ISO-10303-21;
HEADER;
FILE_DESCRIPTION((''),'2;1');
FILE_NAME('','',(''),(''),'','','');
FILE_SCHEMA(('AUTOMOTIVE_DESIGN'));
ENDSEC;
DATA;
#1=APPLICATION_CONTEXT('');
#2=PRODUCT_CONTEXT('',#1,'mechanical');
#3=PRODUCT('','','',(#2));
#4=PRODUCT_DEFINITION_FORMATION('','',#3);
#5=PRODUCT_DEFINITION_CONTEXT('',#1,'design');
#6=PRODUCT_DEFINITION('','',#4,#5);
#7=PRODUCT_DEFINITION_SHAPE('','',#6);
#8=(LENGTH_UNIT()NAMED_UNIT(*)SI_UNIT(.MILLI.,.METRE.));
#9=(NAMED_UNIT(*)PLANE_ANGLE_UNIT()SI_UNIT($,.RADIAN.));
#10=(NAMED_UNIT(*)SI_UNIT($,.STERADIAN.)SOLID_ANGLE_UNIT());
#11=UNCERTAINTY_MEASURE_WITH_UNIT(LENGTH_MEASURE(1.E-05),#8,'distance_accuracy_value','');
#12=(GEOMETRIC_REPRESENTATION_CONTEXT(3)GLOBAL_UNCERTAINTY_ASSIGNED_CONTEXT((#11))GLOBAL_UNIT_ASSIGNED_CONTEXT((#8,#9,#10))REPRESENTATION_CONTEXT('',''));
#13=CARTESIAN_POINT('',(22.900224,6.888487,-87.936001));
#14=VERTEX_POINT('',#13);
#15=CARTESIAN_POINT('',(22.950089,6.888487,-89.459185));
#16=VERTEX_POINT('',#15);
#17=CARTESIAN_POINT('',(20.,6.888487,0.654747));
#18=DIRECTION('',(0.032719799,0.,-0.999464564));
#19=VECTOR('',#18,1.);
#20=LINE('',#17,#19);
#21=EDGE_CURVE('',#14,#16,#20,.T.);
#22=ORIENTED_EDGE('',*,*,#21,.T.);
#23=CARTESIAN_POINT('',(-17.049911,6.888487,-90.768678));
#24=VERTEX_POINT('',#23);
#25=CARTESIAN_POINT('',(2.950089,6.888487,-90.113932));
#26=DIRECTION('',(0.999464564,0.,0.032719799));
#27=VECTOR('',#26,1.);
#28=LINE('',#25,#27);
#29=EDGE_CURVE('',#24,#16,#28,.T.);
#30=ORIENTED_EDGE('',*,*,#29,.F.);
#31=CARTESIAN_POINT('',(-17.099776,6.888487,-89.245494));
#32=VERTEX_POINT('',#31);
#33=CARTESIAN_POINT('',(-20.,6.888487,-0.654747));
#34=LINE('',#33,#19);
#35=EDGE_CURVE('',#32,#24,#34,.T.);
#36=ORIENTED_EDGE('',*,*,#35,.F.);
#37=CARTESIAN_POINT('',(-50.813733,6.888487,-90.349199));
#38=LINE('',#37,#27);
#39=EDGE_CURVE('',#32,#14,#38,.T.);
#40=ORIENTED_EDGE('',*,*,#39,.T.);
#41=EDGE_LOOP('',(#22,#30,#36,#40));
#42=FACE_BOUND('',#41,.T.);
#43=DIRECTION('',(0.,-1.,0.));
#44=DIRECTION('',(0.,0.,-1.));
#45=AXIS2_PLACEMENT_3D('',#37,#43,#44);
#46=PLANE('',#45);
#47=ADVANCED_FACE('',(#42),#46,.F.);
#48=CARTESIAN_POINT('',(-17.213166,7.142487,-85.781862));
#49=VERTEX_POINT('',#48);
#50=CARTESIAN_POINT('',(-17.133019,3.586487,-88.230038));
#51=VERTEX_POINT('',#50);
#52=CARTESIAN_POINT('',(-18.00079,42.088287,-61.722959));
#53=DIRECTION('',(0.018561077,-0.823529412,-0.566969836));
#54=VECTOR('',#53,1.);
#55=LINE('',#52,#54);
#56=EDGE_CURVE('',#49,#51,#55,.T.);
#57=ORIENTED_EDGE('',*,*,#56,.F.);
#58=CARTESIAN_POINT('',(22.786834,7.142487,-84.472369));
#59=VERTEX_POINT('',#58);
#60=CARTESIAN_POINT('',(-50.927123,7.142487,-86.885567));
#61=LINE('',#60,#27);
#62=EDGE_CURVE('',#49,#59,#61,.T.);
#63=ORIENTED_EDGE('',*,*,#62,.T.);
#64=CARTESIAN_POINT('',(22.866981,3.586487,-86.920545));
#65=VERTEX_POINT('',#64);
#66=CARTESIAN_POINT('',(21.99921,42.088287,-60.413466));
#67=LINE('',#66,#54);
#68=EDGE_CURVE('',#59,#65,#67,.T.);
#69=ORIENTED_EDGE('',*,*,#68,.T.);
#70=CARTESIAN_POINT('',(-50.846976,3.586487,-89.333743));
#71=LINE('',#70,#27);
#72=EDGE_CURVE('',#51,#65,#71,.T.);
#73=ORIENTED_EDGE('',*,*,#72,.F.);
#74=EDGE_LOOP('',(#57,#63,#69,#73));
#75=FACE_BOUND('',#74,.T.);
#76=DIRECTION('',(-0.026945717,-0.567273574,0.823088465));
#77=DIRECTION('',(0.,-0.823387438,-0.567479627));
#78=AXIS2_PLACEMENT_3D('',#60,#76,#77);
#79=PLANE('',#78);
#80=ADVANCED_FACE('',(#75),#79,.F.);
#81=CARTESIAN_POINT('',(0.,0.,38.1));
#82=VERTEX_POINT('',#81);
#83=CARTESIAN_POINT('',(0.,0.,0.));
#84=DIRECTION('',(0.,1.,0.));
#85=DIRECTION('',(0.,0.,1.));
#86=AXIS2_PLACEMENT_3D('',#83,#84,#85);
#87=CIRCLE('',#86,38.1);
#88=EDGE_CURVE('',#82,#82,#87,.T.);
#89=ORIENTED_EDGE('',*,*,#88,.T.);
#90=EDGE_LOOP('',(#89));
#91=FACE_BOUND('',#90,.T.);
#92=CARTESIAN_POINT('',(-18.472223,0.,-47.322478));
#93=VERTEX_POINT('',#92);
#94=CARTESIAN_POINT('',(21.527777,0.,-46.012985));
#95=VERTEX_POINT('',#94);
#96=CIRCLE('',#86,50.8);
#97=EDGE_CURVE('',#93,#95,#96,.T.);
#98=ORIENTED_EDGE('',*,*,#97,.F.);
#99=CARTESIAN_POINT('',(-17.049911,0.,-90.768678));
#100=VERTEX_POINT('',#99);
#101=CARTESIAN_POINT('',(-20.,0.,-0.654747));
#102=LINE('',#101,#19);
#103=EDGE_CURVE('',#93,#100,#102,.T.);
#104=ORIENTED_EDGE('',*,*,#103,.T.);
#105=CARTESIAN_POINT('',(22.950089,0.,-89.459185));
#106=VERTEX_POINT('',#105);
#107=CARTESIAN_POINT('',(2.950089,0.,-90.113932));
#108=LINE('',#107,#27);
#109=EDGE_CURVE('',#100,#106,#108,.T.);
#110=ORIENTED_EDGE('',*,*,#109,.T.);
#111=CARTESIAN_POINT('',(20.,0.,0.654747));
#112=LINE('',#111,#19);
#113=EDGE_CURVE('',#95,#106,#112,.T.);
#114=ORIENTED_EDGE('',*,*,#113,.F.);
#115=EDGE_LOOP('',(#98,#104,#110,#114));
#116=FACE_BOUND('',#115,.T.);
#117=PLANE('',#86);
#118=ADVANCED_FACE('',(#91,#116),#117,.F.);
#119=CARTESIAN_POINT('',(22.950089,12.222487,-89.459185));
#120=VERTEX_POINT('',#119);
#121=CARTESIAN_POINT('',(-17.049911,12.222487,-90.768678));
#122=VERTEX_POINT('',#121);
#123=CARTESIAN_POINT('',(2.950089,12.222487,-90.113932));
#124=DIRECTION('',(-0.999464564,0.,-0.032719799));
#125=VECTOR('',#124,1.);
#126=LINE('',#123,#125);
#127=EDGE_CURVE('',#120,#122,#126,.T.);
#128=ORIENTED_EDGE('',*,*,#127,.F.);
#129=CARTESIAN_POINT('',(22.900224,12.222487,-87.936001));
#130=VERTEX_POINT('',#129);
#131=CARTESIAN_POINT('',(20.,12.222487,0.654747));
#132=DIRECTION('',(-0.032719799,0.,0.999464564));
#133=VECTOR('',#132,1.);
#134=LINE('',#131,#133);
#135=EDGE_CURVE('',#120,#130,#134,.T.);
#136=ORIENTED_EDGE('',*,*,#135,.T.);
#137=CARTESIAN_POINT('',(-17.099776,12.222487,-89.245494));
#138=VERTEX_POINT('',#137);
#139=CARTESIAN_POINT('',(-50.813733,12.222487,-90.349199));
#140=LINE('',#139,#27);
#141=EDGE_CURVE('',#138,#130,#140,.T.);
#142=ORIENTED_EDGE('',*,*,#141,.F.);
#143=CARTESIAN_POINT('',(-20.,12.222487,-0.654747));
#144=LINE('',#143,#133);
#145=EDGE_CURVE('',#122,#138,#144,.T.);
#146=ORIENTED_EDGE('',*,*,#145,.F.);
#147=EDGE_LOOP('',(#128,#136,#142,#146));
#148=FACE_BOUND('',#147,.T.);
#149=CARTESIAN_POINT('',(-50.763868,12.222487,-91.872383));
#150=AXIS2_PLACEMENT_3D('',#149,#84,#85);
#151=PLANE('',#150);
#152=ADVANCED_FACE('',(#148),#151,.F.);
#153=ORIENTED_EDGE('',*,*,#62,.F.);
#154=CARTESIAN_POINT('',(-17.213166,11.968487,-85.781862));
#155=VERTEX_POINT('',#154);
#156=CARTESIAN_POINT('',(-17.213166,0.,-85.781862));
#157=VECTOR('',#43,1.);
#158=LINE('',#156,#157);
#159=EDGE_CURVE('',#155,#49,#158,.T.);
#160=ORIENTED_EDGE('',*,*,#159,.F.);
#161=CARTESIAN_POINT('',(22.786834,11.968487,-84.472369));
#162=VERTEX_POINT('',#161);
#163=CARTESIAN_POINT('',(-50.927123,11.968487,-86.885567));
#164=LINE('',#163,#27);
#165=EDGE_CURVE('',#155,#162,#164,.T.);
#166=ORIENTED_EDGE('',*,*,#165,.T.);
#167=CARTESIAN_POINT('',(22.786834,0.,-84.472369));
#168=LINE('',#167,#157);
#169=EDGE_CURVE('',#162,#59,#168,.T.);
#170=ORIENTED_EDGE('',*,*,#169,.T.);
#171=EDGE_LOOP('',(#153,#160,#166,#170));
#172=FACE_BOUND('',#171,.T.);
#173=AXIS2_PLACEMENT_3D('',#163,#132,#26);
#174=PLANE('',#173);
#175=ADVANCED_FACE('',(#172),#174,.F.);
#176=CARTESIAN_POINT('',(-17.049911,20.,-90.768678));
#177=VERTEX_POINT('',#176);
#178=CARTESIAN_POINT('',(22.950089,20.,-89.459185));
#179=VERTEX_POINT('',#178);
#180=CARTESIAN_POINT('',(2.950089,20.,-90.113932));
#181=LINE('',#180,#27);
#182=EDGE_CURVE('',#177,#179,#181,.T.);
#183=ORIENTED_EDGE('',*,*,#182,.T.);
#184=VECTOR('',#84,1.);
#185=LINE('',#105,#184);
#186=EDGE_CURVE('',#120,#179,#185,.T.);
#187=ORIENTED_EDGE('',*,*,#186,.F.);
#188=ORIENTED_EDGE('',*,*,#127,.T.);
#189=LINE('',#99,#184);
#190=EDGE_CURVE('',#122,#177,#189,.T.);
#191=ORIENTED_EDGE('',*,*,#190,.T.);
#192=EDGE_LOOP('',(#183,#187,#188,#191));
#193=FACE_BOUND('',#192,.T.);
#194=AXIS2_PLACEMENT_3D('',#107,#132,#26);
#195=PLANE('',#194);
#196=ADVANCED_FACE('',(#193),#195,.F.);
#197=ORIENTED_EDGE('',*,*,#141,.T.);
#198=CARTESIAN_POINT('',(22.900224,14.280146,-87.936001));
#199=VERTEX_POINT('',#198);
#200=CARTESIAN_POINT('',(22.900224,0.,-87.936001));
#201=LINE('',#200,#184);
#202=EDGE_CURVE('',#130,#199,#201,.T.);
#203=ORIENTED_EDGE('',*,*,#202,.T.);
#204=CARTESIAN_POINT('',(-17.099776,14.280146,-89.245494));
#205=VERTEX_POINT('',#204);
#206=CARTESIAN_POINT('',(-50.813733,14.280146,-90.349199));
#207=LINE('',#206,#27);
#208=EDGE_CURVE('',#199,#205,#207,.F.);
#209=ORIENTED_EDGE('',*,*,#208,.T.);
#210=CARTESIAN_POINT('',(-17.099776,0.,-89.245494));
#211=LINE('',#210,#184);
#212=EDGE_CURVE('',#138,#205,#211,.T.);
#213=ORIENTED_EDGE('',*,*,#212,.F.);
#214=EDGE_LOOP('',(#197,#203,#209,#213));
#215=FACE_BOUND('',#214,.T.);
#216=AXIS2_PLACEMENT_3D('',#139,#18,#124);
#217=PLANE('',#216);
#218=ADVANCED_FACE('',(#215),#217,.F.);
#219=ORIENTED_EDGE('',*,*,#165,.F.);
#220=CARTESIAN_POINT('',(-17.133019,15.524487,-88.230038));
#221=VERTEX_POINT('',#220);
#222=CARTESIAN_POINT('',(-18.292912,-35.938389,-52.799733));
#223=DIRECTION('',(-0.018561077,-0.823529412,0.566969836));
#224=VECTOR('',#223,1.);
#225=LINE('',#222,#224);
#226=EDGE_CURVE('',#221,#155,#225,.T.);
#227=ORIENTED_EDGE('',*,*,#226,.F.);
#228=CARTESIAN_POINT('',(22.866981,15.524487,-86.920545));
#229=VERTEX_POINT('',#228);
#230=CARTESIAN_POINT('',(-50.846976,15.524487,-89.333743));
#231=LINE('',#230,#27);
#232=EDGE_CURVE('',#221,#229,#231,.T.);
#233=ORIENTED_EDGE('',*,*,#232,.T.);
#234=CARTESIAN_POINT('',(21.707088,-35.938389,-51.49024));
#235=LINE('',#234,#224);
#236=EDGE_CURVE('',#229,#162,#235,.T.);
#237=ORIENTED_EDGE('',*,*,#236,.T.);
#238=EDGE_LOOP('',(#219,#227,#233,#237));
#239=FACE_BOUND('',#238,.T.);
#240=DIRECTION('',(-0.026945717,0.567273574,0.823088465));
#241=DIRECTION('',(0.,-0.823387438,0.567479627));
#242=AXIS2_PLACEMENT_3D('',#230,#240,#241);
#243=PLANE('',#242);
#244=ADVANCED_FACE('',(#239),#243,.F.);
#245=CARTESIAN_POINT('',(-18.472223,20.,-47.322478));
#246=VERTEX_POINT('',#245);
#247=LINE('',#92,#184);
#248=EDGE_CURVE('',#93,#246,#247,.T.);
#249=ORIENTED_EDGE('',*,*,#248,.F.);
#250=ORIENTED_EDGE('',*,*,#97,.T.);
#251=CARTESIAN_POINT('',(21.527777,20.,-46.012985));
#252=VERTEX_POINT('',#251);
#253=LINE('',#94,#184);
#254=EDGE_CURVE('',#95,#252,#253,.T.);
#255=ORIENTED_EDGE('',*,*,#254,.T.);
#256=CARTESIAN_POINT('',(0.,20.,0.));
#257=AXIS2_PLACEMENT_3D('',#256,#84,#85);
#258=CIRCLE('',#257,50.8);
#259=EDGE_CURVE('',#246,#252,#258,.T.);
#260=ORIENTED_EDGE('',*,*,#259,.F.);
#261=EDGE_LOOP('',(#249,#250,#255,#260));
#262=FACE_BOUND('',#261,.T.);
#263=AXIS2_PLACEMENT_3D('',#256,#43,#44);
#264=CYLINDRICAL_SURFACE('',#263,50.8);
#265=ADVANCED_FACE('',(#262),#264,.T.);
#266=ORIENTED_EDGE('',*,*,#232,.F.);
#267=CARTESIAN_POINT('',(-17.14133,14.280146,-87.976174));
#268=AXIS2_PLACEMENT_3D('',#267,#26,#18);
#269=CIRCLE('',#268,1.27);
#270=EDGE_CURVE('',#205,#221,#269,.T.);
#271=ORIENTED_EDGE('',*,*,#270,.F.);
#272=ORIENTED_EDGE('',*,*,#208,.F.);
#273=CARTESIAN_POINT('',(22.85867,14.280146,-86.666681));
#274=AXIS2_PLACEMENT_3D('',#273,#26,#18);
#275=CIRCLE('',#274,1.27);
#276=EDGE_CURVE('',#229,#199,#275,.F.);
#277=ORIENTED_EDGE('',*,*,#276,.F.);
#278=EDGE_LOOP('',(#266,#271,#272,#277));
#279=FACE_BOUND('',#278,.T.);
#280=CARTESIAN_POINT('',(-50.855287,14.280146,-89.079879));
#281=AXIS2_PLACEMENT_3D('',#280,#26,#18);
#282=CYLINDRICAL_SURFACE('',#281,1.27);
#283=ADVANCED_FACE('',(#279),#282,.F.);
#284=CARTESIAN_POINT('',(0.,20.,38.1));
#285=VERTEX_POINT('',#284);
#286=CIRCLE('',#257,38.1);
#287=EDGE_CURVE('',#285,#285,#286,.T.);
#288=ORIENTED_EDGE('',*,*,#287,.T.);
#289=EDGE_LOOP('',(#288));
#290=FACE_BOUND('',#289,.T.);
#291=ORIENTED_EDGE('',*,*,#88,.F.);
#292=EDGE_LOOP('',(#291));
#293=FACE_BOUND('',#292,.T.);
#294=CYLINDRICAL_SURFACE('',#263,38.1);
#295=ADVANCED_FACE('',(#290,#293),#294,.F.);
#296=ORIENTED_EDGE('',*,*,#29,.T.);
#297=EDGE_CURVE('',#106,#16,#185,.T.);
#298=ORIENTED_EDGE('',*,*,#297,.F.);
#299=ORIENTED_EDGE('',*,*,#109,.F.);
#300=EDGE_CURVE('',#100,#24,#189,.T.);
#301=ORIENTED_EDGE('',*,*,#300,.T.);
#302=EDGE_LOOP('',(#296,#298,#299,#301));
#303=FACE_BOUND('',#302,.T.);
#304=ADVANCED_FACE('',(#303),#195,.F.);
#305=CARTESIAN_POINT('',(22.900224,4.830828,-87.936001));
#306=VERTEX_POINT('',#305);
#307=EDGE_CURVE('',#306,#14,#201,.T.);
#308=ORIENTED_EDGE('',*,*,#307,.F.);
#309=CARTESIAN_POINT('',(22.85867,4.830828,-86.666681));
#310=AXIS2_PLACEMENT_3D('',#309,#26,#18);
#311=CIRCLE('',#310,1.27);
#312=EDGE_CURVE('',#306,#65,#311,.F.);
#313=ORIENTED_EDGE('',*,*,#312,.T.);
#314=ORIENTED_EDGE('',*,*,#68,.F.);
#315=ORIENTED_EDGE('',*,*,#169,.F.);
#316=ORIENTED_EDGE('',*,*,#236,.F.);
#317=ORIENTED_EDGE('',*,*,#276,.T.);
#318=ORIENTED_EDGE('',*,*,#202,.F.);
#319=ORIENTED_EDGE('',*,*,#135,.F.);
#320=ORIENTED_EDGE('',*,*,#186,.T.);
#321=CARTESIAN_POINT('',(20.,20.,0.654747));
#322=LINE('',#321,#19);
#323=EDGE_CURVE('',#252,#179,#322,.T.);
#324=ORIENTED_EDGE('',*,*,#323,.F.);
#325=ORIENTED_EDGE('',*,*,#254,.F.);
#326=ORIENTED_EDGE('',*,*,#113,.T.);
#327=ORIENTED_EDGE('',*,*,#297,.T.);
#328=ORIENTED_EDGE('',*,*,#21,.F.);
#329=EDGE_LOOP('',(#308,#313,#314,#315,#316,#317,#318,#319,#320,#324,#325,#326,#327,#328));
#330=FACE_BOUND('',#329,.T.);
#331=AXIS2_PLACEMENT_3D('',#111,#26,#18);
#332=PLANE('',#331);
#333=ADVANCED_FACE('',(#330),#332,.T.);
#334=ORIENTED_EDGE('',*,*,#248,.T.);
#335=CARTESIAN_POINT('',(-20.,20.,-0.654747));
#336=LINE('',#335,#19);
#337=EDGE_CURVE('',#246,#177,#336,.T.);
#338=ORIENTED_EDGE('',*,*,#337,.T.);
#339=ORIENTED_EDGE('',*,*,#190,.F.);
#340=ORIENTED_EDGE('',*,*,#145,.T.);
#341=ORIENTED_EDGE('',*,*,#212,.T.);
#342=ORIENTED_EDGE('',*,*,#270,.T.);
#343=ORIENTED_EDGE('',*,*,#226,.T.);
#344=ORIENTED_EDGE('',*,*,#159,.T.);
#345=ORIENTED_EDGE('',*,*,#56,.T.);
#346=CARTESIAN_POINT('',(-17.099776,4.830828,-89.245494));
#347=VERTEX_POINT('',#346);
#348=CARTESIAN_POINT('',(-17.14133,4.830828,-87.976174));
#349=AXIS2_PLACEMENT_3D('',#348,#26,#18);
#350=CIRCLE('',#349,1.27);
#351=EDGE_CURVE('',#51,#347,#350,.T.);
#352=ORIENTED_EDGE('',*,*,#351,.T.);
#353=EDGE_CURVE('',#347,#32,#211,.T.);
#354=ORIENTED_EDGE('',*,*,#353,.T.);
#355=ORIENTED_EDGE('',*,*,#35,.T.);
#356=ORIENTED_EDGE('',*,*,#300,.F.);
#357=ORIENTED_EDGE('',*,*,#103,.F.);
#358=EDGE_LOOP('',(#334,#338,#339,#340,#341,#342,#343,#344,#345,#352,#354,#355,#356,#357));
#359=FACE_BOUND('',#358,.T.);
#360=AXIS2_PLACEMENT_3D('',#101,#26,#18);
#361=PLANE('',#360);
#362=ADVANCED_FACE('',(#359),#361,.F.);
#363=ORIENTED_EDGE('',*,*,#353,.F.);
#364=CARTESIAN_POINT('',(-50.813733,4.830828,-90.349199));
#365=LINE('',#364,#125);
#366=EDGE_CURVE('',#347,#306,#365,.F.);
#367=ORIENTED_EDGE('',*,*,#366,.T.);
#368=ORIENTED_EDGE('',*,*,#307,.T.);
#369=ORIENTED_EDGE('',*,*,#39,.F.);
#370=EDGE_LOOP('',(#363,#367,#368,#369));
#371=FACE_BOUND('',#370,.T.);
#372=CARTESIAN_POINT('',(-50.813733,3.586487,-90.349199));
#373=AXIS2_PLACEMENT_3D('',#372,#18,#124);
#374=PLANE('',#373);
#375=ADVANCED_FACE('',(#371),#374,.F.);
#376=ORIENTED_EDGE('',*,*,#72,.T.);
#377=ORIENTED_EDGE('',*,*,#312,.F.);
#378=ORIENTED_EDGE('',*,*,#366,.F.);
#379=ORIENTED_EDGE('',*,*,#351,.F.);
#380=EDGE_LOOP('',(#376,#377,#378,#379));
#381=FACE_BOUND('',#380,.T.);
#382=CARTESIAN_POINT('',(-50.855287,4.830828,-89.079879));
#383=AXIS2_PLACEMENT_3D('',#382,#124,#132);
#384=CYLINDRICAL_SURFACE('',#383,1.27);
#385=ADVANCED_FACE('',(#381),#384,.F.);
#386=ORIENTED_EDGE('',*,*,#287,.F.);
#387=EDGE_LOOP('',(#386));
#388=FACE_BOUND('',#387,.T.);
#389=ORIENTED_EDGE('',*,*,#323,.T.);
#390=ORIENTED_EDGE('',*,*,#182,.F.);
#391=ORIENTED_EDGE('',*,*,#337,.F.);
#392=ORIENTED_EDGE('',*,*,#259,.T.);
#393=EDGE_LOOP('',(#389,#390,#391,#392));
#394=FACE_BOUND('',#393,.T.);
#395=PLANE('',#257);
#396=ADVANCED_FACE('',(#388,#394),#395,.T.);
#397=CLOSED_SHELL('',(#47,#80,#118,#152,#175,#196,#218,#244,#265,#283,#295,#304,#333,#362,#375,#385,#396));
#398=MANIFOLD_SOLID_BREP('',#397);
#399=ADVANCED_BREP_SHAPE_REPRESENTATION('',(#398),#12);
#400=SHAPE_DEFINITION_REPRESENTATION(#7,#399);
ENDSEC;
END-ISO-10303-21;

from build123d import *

# Parameters (mm, degrees)
SKETCH1_R               = 50.8
SKETCH1_R_2             = 38.1
BOSS_EXTRUDE1_DEPTH     = 20
BOSS_EXTRUDE2_START     = -20
BOSS_EXTRUDE2_DEPTH     = 20
CUT_EXTRUDE1_DEPTH      = 118.349403873
CUT_EXTRUDE1_DEPTH_BACK = 118.349403873
FILLET1_R               = 1.27


with BuildPart() as part:
    # Sketch1 → Boss-Extrude1 (new body)
    with BuildSketch(Plane(origin=(0, 0, 0), x_dir=(1, 0, 0), z_dir=(0, 1, 0))):
        with Locations(Location((0, 0, 0), (0, 0, 270))):
            Circle(SKETCH1_R)
        with Locations(Location((0, 0, 0), (0, 0, 270))):
            Circle(SKETCH1_R_2, mode=Mode.SUBTRACT)
    extrude(amount=BOSS_EXTRUDE1_DEPTH)

    # Sketch2 → Boss-Extrude2 (add)
    with BuildSketch(Plane(origin=(0, 20, 0), x_dir=(1, 0, 0), z_dir=(0, 1, 0)).offset(BOSS_EXTRUDE2_START)):
        with BuildLine():
            ThreePointArc((9.793574848, 49.847024903), (15.777570545, 48.287765197), (21.527776819, 46.012985398))
            Line((21.527776819, 46.012985398), (21.640596186, 49.459185087))
            Line((21.640596186, 49.459185087), (9.793574848, 49.847024903))
        make_face()
        with BuildLine():
            Line((-18.147499758, 57.241535713), (-18.359403814, 50.768678182))
            Line((-18.359403814, 50.768678182), (-6.512382476, 50.380838366))
            ThreePointArc((-6.512382476, 50.380838366), (1.662165771, 50.772799853), (9.793574848, 49.847024903))
            Line((9.793574848, 49.847024903), (21.640596186, 49.459185087))
            Line((21.640596186, 49.459185087), (21.852500242, 55.932042618))
            Line((21.852500242, 55.932042618), (-18.147499758, 57.241535713))
        make_face()
        with BuildLine():
            Line((-18.359403814, 50.768678182), (-18.472223181, 47.322478493))
            ThreePointArc((-18.472223181, 47.322478493), (-12.585548111, 49.216297898), (-6.512382476, 50.380838366))
            Line((-6.512382476, 50.380838366), (-18.359403814, 50.768678182))
        make_face()
        Polygon((-17.049910719, 90.768678182), (-18.147499758, 57.241535713), (21.852500242, 55.932042618), (22.950089281, 89.459185087), align=None)
    extrude(amount=BOSS_EXTRUDE2_DEPTH)

    # Sketch4 → Cut-Extrude1 (cut, two sides: drawn at the far end of the back side and taken through both)
    with BuildSketch(Plane(origin=(20, 0, 0.654746548), x_dir=(0.03271979863396448, 0, -0.9994645640428443), z_dir=(0.9994645640428443, 0, 0.03271979863396448)).offset(-CUT_EXTRUDE1_DEPTH_BACK)):
        Polygon((90.162207723, 12.222487003), (88.638207723, 12.222487003), (88.638207723, 15.524487003), (87.622207723, 15.524487003), (85.172720429, 11.968487003), (85.172720429, 7.142487003), (87.622207723, 3.586487003), (88.638207723, 3.586487003), (88.638207723, 6.888487003), (90.162207723, 6.888487003), align=None)
    extrude(amount=CUT_EXTRUDE1_DEPTH + CUT_EXTRUDE1_DEPTH_BACK, mode=Mode.SUBTRACT)

    # Fillet1
    # the kernel refuses this fillet: 1.27 mm, written as the material it adds along each edge
    with BuildSketch(Plane(origin=(-17.099775692, 3.586487003, -89.245494187), x_dir=(-0.032719798633964424, 1.5621799566964636e-12, 0.9994645640428443), z_dir=(0.9994645640428443, 0, 0.03271979863396443))) as fillet1_piece_1:
        with BuildLine():
            CenterArc((1.27, -1.244340789), FILLET1_R, 101.536959033, 78.463040967)
            Line((0, -1.244340789), (-0.0254, -1.244340789))
            Line((-0.0254, -1.244340789), (-0.0254, 0))
            Line((-0.0254, 0), (0, 0.0254))
            ThreePointArc((0, 0.0254), (0.508, 0.0254), (1.01092, 0.024886816))
            Line((1.01092, 0.024886816), (1.016, 0))
        make_face()
    extrude(amount=40.021428912)
    with BuildSketch(Plane(origin=(-17.099775692, 15.524487003, -89.245494187), x_dir=(0, -1, 0), z_dir=(0.9994645640428443, 0, 0.03271979863396443))) as fillet1_piece_2:
        with BuildLine():
            CenterArc((1.244340789, -1.27), FILLET1_R, 90, 78.463040967)
            Line((0, -1.016), (-0.024886816, -1.01092))
            ThreePointArc((-0.024886816, -1.01092), (-0.0254, -0.508), (-0.0254, 0))
            Line((-0.0254, 0), (0, 0.0254))
            Line((0, 0.0254), (1.244340789, 0.0254))
            Line((1.244340789, 0.0254), (1.244340789, 0))
        make_face()
    extrude(amount=40.021428912)


solid = part.part
